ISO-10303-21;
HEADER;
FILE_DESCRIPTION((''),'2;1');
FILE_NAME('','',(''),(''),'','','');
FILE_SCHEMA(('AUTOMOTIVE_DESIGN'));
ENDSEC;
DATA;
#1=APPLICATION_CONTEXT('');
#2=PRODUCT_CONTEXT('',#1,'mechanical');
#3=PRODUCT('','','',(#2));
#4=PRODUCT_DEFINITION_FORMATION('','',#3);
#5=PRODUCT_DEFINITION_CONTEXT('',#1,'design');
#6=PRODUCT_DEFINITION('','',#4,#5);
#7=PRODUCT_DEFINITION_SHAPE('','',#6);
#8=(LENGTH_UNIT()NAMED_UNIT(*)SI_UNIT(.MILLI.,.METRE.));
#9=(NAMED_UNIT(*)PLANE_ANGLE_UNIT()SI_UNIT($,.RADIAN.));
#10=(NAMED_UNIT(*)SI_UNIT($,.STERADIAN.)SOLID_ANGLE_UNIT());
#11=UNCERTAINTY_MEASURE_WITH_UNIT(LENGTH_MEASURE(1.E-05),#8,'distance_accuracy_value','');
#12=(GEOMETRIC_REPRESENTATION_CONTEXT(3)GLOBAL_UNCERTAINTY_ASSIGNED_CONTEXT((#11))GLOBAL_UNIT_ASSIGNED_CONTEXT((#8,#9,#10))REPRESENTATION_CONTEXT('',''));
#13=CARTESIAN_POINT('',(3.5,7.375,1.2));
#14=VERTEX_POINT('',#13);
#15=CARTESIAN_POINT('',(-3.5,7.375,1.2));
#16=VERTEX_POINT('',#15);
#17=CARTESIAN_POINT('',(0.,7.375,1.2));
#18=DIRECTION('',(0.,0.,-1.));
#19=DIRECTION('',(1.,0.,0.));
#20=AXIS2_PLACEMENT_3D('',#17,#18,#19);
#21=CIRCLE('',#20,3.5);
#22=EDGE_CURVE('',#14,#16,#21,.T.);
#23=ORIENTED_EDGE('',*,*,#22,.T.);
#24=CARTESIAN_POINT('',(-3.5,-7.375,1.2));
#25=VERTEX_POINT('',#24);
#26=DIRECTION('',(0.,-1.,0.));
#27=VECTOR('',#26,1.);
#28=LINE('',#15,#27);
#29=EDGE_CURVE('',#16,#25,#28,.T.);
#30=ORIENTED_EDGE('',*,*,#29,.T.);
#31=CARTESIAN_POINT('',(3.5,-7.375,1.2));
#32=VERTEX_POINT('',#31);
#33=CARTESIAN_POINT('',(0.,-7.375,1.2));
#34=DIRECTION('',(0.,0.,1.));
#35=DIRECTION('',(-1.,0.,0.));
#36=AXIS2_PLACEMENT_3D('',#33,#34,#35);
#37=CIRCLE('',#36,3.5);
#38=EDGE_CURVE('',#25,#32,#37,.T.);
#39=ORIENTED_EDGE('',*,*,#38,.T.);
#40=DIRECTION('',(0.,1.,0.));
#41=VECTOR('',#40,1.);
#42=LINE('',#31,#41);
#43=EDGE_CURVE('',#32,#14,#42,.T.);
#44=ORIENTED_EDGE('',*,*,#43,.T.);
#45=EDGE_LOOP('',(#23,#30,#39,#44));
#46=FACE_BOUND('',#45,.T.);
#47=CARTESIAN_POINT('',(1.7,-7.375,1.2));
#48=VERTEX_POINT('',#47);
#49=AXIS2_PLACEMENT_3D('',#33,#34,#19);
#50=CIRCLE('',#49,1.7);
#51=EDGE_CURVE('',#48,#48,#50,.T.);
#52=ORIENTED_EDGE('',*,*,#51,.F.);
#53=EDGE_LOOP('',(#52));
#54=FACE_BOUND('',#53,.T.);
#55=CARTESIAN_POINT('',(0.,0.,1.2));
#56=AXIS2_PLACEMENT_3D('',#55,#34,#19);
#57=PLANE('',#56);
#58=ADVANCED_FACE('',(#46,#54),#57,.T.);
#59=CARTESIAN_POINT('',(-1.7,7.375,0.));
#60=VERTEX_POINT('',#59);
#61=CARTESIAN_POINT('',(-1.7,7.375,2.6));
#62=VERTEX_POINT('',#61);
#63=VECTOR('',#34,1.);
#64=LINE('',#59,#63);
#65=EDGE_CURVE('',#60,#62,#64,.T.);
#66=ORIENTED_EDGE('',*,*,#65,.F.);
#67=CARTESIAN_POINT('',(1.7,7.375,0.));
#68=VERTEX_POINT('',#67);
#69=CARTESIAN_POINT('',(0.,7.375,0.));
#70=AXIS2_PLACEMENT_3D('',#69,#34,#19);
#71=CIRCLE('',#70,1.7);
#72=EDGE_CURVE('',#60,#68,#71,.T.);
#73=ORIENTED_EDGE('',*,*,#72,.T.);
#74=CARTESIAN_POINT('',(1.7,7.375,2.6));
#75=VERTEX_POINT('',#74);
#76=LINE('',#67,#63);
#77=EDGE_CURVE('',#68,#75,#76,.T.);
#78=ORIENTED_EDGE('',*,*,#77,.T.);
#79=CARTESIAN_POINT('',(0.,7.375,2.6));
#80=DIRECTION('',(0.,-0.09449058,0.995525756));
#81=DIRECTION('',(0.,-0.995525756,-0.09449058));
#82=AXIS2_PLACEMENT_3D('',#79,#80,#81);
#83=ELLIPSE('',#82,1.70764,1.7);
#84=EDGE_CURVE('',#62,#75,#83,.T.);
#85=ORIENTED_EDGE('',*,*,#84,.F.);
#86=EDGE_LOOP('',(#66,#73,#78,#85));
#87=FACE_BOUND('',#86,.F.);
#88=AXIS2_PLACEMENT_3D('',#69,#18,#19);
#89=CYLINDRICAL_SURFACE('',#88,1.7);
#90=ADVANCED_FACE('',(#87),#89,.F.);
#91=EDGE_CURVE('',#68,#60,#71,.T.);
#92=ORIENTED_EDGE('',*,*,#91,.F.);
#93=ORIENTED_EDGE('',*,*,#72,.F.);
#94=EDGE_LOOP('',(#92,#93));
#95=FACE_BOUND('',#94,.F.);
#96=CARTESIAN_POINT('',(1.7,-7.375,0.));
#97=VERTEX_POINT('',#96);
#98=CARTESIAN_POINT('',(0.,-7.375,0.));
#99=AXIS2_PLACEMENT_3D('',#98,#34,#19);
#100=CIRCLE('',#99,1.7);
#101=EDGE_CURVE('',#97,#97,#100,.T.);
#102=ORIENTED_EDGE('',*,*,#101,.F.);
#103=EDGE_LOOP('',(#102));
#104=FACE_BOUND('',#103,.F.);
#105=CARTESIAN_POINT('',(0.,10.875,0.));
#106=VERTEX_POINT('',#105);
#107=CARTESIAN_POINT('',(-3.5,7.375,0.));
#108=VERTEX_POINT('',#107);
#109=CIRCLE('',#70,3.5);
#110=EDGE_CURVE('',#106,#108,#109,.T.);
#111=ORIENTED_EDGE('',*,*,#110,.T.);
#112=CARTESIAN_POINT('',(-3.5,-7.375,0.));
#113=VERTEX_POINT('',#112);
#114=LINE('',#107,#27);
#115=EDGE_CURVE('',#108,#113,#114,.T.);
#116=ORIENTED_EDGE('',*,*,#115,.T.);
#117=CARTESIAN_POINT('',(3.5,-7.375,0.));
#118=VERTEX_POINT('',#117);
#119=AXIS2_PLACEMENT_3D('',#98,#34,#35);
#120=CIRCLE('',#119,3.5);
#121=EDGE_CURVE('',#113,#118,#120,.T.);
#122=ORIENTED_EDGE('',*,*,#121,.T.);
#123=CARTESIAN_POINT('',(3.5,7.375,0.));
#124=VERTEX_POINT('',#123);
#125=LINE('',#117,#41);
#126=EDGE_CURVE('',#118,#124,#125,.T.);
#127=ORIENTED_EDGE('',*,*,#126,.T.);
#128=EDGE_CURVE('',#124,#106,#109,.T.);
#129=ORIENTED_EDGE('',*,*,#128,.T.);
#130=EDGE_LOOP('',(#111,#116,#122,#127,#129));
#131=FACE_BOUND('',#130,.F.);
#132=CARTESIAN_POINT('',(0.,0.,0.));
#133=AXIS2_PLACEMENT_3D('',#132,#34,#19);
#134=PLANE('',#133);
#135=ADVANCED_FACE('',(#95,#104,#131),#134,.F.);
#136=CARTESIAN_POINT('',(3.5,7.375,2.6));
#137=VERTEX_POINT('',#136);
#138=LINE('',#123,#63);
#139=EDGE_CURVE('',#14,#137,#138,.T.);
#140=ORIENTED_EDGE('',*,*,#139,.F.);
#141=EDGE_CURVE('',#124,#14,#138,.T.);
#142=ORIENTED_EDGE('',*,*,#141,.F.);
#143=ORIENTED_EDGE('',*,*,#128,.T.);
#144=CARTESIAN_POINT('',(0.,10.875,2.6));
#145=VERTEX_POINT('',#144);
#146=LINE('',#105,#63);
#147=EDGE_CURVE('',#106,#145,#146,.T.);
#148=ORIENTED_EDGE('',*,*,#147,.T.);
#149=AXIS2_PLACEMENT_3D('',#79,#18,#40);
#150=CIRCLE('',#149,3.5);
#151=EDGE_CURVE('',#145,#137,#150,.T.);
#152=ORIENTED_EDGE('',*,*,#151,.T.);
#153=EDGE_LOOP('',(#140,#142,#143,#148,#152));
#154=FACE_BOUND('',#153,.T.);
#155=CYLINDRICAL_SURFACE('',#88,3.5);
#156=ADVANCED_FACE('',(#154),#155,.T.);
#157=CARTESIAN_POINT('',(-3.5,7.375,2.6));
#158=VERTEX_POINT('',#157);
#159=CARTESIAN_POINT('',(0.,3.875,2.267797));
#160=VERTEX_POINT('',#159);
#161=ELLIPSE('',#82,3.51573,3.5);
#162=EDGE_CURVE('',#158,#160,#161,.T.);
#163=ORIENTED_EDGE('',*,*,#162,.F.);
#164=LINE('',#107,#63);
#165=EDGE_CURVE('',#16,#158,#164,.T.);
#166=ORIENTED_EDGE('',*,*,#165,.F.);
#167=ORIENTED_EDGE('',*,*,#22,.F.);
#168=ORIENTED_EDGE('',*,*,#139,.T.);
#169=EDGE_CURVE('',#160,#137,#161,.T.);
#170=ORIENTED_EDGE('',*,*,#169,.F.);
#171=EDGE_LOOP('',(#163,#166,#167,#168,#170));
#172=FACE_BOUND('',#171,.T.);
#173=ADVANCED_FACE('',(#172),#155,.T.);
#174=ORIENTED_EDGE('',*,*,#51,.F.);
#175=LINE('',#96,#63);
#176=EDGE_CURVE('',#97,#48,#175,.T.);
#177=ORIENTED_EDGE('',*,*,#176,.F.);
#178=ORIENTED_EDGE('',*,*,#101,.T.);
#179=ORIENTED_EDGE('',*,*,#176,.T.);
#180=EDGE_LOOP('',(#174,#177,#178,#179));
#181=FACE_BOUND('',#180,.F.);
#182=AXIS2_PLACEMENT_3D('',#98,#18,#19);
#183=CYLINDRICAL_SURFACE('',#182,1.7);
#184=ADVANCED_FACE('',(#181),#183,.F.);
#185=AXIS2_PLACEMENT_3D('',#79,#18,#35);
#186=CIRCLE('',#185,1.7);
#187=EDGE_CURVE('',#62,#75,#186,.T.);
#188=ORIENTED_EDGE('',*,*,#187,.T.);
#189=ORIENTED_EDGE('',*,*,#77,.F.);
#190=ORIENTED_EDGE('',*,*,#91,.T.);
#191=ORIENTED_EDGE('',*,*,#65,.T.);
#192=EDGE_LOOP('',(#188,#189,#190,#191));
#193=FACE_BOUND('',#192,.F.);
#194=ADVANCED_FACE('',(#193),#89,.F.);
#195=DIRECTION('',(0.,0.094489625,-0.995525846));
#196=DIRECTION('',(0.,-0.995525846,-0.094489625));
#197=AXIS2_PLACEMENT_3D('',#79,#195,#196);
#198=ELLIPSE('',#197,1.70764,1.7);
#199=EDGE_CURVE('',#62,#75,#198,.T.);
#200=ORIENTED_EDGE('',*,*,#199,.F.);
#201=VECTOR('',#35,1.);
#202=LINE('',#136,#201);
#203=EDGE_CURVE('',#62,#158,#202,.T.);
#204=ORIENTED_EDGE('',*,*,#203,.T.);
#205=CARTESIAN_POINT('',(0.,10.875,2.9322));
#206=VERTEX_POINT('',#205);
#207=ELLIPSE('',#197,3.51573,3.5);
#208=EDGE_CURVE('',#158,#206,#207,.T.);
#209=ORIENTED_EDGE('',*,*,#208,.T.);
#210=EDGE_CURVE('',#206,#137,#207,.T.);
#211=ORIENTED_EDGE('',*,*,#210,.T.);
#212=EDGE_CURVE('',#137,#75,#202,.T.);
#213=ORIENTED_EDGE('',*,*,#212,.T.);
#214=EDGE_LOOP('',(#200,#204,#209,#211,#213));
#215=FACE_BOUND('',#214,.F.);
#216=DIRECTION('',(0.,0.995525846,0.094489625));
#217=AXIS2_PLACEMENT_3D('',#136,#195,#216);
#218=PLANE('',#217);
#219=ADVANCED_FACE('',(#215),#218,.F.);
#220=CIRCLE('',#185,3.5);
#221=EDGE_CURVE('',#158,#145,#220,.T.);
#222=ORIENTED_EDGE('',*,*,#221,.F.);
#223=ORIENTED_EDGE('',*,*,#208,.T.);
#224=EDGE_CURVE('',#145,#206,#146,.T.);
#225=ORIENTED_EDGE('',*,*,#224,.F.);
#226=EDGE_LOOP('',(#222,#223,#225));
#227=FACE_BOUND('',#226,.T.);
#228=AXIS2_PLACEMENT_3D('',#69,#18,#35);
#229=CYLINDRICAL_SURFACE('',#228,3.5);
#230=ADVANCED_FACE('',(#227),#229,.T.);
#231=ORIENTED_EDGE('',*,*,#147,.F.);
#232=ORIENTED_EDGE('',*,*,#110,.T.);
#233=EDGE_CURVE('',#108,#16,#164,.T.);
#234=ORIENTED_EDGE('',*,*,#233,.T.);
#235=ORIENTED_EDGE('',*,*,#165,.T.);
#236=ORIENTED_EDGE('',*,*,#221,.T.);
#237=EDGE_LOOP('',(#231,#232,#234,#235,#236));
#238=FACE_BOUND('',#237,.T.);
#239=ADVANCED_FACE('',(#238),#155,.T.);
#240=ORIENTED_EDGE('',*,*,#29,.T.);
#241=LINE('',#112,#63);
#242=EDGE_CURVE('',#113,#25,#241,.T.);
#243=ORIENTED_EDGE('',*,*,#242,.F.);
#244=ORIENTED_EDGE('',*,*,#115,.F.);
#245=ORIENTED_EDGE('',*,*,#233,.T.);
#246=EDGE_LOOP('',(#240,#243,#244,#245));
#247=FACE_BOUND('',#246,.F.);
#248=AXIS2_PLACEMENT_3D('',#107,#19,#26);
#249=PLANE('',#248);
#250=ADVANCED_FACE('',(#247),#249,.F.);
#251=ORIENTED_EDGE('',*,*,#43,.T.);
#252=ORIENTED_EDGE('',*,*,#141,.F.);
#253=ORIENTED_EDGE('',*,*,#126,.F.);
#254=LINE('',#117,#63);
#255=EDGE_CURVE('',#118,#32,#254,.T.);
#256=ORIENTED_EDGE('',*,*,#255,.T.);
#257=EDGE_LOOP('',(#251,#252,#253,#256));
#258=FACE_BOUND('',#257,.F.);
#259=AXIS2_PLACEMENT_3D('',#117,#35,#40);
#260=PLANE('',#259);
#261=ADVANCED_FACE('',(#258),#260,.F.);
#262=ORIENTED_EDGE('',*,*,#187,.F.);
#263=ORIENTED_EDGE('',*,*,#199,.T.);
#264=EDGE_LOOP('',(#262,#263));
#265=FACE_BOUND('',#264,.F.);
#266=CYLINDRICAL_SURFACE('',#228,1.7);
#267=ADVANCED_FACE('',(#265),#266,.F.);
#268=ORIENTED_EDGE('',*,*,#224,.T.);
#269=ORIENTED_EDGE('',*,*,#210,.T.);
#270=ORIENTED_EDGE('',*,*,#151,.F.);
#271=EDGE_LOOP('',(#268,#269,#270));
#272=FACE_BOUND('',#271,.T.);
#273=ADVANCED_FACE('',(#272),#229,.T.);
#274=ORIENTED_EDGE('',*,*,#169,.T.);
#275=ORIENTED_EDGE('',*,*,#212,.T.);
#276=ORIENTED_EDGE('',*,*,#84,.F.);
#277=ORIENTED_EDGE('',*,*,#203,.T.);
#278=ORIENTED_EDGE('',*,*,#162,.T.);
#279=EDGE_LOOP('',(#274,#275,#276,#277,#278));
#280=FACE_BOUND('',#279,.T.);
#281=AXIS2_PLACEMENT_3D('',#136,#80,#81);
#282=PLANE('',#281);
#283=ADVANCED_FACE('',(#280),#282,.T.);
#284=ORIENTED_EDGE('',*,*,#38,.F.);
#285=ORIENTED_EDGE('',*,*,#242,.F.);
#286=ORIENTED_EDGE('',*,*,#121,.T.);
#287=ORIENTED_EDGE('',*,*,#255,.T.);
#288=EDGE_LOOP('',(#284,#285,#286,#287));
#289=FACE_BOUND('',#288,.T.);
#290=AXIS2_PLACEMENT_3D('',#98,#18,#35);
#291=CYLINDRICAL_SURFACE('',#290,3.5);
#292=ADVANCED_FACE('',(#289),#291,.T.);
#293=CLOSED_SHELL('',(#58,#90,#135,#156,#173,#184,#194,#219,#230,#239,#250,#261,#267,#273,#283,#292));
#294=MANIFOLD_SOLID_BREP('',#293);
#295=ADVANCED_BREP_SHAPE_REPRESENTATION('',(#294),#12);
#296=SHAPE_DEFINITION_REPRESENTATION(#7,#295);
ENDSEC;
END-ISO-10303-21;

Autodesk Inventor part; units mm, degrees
ref_plane "YZ Plane" through (0, 0, 0) normal (1, 0, 0) x (0, 1, 0)
ref_plane "XZ Plane" through (0, 0, 0) normal (0, 1, 0) x (-1, 0, 0)
ref_plane "XY Plane" through (0, 0, 0) normal (0, 0, 1) x (1, 0, 0)
sketch "Náčrt1" plane through (0, 0, 0) normal (0, 0, 1) x (1, 0, 0)
  line L0 (0, 7.375) -> (0, -7.375) construction
  line L1 (-3.5, 7.375) -> (-3.5, -7.375)
  line L2 (3.5, -7.375) -> (3.5, 7.375)
  arc A0 (3.5, 7.375) -> (-3.5, 7.375) centre (0, 7.375) ccw
  arc A1 (-3.5, -7.375) -> (3.5, -7.375) centre (0, -7.375) ccw
  circle A2 centre (0, 7.375) radius 1.7
  circle A3 centre (0, -7.375) radius 1.7
  circle A4 centre (0, 7.375) radius 3.5
  point P0 (0, 0)
  point P1 (0, 0)
  point P2 (-3.5, 7.375)
  point P3 (3.5, 7.375)
  dimension "d0" = 14.75
  dimension "d1" = 3.5
  dimension "d2" = 3.4
extrude "Vysunutí1" add sketch "Náčrt1" along normal blind 1.2
extrude "Vysunutí2" add sketch "Náčrt1" along normal blind 2.6 contours A0 A4
sketch "Náčrt4" plane through (3.5, -7.375, 0) normal (1, 0, 0) x (0, 0, -1)
  line L0 (-2.6, 13.05) -> (-2.6, 16.45) projected
  line L1 (-1.2, -1.7) -> (-1.2, 1.7) projected
  line L2 (-2.6, 14.75) -> (-1.2, 0)
  line L3 (-2.6, 18.25) -> (-2.6, 11.25) projected
  line L4 (0, 14.75) -> (0, 14.75) projected
  line L5 (0, 14.75) -> (-1.2, 14.75) projected
  line L6 (-1.2, 14.75) -> (-1.2, 14.75) projected
  line L7 (0, 14.75) -> (-1.2, 14.75) projected
  line L8 (-1.2, 11.25) -> (-2.6, 11.25) projected
  line L9 (-2.6, 14.75) -> (-2.9322, 18.25)
  line L10 (-2.6, 18.25) -> (-2.9322, 18.25)
  point P0 (0, 7.375)
  point P1 (-2.2678, 11.25)
extrude "Vysunutí3" cut sketch "Náčrt4" against normal through all contours L0 L2 L8 L3
extrude "Vysunutí4" add sketch "Náčrt4" against normal up to surface (7 mm away) contours L9 L10 L3 L0
sketch "Náčrt5" plane through (0, 0, 0) normal (0, 0, -1) x (-1, 0, 0)
  circle A0 centre (0, 7.375) radius 1.7 projected
  circle A1 centre (0, -7.375) radius 1.7 projected
  line L0 (-3.5, -7.375) -> (-3.5, 7.375) projected
  arc A2 (-3.5, -7.375) -> (3.5, -7.375) centre (0, -7.375) ccw projected
  line L1 (3.5, 7.375) -> (3.5, -7.375) projected
  arc A3 (3.5, 7.375) -> (-3.5, 7.375) centre (0, 7.375) ccw projected
  arc A4 (1.7, 7.375) -> (-1.7, 7.375) centre (0, 7.375) ccw projected
  line L2 (-1.7, 7.375) -> (1.7, 7.375) projected
  arc A5 (3.5, 7.375) -> (0, 10.875) centre (0, 7.375) ccw projected
  line L3 (3.5, 10.875) -> (3.5, 7.375) projected
  line L4 (0, 10.875) -> (3.5, 10.875) projected
  arc A6 (0, 10.875) -> (-3.5, 7.375) centre (0, 7.375) ccw projected
  line L5 (-3.5, 10.875) -> (0, 10.875) projected
  line L6 (-3.5, 7.375) -> (-3.5, 10.875) projected
  point P0 (0, 0)
  point P1 (3.5, 7.375)
  point P2 (0, 10.875)
  point P3 (0, 10.875)
  point P4 (-3.5, 7.375)
  point P5 (-1.7, 7.375)
extrude "Vysunutí5" cut sketch "Náčrt5" against normal through all contours L2 A0 | L6 L5 A3 | L4 L3 A3 picked at (0.5018, 7.6383)
properties part number "back qre flex holder"
